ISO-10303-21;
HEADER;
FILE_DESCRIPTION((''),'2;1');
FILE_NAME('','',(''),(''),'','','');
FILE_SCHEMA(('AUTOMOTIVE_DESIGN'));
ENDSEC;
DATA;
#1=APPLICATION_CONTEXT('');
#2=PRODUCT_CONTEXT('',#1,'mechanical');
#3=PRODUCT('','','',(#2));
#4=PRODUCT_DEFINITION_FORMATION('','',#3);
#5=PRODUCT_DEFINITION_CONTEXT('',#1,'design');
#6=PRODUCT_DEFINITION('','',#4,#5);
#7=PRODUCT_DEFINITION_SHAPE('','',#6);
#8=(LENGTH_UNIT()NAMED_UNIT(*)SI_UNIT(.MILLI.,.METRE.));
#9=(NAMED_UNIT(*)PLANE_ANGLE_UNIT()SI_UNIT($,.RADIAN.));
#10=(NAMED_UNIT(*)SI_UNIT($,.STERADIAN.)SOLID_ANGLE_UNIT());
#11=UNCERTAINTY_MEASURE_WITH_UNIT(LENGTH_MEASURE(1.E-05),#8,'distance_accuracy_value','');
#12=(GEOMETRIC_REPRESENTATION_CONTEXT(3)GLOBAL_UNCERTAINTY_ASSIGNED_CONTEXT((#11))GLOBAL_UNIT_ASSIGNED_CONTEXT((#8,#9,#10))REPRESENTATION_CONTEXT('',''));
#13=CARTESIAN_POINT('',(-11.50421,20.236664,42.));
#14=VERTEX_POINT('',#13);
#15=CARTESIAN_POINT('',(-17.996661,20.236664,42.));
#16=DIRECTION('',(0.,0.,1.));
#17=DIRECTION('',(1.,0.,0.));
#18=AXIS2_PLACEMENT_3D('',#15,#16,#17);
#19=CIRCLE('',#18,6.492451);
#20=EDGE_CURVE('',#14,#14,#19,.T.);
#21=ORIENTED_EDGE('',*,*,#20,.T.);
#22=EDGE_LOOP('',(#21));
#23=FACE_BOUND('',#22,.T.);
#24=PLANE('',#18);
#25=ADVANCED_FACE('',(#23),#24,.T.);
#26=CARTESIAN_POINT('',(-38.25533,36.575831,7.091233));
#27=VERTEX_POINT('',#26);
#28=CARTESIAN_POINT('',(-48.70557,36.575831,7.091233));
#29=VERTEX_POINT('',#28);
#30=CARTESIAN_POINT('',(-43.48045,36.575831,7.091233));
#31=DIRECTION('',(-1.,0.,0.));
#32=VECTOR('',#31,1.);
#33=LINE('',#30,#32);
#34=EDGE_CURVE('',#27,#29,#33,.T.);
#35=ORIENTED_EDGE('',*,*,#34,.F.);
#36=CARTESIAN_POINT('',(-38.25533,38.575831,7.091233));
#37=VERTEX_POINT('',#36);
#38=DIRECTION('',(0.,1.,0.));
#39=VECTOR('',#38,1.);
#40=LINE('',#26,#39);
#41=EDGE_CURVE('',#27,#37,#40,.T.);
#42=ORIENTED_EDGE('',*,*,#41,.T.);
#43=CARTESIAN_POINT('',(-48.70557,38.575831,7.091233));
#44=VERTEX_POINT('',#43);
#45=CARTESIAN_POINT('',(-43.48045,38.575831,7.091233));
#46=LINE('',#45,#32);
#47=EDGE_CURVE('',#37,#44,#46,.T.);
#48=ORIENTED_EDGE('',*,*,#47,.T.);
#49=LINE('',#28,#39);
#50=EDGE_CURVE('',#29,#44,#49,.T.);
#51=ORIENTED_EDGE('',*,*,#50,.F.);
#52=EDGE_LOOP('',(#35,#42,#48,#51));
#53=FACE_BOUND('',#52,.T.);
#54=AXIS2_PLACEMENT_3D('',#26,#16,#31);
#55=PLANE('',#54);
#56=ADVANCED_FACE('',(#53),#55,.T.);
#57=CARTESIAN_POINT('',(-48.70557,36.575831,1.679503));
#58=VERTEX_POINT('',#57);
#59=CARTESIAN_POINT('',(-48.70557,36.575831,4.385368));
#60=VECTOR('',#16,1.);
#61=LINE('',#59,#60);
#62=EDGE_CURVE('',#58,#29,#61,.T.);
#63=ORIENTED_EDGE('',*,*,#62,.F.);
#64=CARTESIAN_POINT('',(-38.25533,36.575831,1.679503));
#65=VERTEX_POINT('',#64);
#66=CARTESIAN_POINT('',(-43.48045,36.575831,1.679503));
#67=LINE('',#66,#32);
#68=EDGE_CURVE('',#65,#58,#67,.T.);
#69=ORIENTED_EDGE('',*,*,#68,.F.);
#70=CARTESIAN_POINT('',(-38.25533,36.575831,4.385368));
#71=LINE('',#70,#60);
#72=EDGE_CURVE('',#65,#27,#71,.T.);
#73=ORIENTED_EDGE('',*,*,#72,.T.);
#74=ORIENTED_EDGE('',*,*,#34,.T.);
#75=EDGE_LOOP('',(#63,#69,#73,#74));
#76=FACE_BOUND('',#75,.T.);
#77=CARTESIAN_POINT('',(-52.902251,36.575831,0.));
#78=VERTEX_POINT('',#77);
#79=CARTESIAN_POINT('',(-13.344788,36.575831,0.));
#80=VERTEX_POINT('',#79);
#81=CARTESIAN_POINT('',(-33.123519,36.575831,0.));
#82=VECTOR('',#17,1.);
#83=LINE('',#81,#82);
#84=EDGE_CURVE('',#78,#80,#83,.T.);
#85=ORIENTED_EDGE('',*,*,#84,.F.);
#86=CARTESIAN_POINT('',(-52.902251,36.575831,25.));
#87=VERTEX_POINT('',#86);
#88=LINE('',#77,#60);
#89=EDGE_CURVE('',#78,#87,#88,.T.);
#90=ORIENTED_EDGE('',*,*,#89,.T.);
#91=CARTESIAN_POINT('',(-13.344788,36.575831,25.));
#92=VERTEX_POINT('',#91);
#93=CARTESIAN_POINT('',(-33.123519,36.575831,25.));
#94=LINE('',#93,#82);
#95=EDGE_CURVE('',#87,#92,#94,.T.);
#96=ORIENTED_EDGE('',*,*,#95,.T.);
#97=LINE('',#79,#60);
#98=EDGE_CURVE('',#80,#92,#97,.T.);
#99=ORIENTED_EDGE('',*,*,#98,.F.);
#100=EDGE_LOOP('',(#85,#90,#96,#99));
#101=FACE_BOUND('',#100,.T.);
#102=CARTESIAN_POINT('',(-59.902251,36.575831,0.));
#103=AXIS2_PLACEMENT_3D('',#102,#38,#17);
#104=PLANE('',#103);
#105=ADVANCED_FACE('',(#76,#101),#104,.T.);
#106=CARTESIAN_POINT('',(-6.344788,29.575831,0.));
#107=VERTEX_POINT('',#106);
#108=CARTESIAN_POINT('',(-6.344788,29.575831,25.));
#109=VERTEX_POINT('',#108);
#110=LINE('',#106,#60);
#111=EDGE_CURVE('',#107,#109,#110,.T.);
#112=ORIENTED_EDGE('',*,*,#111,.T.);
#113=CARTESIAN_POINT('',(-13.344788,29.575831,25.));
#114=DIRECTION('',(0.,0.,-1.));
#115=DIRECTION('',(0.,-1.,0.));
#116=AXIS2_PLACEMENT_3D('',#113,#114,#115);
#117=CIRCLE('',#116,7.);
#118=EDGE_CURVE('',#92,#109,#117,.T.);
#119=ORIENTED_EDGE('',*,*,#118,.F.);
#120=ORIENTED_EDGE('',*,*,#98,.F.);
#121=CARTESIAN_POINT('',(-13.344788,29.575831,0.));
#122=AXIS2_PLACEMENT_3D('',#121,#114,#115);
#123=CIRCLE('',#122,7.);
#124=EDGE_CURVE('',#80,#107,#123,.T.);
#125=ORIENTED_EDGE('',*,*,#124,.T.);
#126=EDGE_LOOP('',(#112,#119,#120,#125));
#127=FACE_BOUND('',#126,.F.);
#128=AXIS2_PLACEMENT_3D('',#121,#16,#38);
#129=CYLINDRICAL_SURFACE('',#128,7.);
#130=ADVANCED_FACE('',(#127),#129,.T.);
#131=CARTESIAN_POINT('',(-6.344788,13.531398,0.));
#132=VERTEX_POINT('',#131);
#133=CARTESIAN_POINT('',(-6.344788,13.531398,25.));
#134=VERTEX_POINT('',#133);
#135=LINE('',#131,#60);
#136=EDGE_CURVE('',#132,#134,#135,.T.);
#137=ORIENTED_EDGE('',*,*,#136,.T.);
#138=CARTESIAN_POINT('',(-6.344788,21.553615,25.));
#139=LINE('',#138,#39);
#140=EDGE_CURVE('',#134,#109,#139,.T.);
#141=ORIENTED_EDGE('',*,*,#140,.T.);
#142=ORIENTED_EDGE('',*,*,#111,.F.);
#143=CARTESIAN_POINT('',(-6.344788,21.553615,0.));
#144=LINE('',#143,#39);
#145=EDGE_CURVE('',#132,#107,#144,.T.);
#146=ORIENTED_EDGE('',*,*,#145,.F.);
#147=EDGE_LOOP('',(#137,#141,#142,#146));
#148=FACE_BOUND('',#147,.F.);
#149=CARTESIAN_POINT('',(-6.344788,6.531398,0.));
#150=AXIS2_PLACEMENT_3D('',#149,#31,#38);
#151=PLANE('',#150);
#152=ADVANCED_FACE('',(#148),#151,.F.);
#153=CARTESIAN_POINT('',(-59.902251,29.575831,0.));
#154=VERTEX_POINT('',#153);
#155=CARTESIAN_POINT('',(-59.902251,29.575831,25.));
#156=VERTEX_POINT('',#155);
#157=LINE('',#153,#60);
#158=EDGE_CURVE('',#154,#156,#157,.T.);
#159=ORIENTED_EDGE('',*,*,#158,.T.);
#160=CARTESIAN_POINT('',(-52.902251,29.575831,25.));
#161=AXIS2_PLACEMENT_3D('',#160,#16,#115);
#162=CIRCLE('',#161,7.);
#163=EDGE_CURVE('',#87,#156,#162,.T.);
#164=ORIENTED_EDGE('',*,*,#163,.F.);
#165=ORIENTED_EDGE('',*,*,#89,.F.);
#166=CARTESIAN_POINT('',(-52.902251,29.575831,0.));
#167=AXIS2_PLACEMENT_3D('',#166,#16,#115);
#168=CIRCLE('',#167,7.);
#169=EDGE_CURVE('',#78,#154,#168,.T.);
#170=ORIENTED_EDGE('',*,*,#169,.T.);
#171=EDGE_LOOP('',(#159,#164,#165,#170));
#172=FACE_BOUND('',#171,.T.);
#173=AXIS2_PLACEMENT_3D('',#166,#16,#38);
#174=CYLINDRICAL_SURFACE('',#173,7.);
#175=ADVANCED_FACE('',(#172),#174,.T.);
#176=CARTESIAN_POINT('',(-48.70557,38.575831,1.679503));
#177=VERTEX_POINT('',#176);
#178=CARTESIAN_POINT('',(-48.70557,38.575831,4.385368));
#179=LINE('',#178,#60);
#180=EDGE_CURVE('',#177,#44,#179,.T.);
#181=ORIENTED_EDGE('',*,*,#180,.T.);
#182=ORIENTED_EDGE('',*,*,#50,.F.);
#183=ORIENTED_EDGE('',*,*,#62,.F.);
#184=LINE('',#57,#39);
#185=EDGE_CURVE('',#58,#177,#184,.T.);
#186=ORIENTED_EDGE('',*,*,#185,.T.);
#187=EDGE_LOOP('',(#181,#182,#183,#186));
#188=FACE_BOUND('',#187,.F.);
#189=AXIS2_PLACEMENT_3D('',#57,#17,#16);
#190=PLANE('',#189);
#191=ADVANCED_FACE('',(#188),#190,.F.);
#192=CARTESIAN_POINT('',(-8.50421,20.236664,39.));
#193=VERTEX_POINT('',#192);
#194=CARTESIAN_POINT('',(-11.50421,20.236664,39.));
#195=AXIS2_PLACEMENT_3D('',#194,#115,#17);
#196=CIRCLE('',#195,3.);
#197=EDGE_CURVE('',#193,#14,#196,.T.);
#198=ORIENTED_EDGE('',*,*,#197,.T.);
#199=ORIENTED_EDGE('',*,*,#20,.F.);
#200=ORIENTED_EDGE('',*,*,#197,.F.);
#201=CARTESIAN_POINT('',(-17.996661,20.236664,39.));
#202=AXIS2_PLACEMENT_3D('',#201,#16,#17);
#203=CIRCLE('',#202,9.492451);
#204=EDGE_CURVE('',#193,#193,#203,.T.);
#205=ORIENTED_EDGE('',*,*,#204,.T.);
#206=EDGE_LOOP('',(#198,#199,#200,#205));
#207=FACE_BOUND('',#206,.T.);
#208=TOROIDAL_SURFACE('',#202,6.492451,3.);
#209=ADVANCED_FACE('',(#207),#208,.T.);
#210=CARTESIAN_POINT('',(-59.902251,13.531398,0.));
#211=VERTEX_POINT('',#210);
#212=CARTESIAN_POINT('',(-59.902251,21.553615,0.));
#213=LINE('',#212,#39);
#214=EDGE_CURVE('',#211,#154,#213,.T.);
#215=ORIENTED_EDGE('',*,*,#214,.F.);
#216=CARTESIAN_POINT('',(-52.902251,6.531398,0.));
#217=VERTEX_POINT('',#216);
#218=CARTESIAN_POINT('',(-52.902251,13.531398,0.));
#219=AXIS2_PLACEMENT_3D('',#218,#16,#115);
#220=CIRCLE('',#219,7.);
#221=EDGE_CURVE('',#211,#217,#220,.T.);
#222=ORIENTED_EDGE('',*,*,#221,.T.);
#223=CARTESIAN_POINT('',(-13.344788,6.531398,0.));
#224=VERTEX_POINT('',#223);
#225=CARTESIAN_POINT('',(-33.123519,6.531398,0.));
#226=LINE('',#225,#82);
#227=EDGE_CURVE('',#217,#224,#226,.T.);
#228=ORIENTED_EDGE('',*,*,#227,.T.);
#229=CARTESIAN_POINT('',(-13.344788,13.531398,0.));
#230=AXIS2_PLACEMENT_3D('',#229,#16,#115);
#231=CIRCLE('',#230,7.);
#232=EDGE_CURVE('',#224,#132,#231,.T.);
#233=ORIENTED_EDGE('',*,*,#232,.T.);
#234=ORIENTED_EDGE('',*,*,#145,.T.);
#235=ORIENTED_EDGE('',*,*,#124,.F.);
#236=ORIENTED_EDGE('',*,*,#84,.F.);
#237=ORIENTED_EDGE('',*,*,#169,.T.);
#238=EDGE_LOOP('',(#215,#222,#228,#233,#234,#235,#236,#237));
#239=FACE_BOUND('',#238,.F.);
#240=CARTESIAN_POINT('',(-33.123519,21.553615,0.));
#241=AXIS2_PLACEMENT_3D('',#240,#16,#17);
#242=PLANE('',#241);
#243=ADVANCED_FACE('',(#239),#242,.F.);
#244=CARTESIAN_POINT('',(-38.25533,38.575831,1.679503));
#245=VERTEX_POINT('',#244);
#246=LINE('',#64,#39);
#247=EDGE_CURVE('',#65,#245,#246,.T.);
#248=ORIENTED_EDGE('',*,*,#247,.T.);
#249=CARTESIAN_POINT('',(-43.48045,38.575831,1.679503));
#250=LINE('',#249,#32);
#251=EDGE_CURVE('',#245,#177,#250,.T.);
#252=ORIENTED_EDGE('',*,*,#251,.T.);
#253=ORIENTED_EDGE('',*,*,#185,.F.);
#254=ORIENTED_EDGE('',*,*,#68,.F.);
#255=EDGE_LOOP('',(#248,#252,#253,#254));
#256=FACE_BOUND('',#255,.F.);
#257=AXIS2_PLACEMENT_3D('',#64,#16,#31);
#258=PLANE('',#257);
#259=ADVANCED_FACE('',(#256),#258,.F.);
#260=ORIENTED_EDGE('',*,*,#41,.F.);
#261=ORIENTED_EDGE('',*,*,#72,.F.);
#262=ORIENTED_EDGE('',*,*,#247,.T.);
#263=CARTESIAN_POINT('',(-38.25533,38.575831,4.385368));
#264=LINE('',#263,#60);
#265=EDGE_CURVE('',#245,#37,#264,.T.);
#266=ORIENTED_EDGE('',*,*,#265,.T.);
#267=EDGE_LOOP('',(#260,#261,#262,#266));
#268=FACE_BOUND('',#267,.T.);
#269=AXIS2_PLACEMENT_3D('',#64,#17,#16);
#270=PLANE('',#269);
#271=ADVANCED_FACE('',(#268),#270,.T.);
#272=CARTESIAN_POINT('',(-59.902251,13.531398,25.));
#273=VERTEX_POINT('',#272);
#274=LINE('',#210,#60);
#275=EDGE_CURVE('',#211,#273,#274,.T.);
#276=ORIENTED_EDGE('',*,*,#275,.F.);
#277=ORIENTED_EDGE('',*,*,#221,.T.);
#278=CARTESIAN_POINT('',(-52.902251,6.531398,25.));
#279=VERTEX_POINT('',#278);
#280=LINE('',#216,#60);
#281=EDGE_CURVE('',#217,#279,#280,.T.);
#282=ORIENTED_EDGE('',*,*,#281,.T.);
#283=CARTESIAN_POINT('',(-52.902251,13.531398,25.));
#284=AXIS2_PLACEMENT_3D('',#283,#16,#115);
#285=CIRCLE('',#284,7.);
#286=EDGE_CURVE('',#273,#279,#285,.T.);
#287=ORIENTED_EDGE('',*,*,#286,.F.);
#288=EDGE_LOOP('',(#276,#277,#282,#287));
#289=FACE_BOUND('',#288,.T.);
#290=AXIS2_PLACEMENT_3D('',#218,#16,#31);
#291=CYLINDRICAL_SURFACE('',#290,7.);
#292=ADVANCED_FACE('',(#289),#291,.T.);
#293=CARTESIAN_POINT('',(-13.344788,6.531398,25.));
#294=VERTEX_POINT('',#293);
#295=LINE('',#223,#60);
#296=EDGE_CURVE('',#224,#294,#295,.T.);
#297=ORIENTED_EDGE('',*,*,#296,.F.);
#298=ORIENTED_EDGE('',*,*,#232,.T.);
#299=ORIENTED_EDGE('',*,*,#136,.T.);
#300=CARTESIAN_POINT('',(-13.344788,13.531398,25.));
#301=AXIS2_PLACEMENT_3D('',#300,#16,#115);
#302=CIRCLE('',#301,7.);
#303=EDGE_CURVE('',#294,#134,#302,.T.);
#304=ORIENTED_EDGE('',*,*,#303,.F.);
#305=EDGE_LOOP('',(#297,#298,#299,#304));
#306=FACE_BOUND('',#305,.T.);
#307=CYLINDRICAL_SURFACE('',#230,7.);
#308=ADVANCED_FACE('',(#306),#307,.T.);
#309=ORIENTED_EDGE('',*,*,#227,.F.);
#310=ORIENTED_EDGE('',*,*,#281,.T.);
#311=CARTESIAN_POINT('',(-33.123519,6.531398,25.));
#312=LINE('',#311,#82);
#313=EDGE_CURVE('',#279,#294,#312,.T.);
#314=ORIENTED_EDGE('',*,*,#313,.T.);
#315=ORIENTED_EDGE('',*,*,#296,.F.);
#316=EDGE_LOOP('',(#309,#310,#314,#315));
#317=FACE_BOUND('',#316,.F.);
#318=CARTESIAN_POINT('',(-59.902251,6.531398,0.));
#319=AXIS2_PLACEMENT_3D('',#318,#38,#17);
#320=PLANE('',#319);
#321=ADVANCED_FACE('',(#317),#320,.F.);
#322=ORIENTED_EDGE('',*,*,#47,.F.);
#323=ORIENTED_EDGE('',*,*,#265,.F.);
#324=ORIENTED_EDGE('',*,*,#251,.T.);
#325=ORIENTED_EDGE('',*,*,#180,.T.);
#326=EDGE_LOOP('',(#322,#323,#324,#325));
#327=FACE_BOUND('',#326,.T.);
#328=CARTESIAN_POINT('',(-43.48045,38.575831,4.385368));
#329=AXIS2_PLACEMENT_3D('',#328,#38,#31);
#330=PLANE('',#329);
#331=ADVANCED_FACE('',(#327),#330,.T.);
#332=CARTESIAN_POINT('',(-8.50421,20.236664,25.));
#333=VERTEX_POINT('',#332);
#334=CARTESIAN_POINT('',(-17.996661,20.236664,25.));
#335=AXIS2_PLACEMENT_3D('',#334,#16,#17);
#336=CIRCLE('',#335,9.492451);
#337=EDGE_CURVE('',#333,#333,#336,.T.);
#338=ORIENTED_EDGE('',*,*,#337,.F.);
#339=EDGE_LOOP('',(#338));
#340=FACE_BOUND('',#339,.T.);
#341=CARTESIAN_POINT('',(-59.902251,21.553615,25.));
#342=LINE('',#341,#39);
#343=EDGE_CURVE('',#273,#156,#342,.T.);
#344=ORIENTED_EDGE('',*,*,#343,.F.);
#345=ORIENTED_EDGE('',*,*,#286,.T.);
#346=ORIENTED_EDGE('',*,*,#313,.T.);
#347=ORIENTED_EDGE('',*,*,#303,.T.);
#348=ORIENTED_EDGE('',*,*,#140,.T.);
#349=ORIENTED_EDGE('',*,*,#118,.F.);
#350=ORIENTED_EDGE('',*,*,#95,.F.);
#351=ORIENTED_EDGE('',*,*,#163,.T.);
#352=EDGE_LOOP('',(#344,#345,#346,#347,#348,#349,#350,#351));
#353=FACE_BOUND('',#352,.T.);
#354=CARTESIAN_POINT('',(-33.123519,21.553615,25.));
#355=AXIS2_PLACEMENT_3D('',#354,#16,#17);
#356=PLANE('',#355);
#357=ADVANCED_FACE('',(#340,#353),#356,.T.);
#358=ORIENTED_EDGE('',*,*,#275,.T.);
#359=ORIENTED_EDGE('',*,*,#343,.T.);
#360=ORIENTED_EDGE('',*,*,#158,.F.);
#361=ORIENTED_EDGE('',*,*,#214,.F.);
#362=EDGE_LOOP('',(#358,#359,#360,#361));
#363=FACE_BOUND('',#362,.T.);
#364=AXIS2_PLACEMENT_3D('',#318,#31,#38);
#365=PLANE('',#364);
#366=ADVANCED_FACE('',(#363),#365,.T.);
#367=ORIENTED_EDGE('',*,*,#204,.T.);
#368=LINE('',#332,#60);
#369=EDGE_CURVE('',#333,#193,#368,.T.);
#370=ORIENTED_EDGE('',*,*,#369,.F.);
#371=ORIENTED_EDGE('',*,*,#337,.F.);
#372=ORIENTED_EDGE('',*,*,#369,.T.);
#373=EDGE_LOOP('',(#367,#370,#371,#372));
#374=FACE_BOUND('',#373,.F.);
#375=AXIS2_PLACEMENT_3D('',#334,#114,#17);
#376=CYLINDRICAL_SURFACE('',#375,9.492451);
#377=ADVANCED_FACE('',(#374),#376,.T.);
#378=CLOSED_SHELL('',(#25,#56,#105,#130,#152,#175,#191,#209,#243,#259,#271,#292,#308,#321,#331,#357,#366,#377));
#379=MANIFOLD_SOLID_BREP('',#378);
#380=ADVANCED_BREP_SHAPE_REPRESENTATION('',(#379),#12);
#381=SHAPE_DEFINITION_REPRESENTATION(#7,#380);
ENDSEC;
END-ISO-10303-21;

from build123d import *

# Parameters (mm, degrees)
F0_W      = 53.5574629903
F0_H      = 30.0444331951
F1_DEPTH  = 25
F2_R      = 9.492451093
F3_DEPTH  = 17
F4_R      = 3
F5_R      = 7
F6_R      = 7
F7_R      = 7
F8_R      = 7
F11_W     = 10.4502402246
F11_H     = 5.4117300315
F12_DEPTH = 2


# Not quite as in the source:
# - the program builds the solid bodies; features that only make, move or delete a surface that nothing else refers to are left out


with BuildPart() as f1:
    # F0 (on Top) → F1 (new body)
    with BuildSketch(Plane.XY):
        with Locations((-33.1235192716, 21.5536148753)):
            Rectangle(F0_W, F0_H)
    extrude(amount=F1_DEPTH)

    # F2 (on face) → F3 (join)
    with BuildSketch(Plane.XY.offset(25)):
        with Locations((-17.996661365, 20.2366635203)):
            Circle(F2_R)
    extrude(amount=F3_DEPTH)

    # F4
    f4_edges = [f1.edges().sort_by_distance(p)[0] for p in [
        (-27.489112, 20.236664, 42),
    ]]
    fillet(f4_edges, radius=F4_R)

    # F5
    f5_edges = [f1.edges().sort_by_distance(p)[0] for p in [
        (-6.344788, 36.575831, 12.5),
    ]]
    fillet(f5_edges, radius=F5_R)

    # F6
    f6_edges = [f1.edges().sort_by_distance(p)[0] for p in [
        (-59.902251, 36.575831, 12.5),
    ]]
    fillet(f6_edges, radius=F6_R)

    # F7
    f7_edges = [f1.edges().sort_by_distance(p)[0] for p in [
        (-59.902251, 6.531398, 12.5),
    ]]
    fillet(f7_edges, radius=F7_R)

    # F8
    f8_edges = [f1.edges().sort_by_distance(p)[0] for p in [
        (-6.344788, 6.531398, 12.5),
    ]]
    fillet(f8_edges, radius=F8_R)

    # F11 (on face) → F12 (join)
    with BuildSketch(Plane(origin=(0, 36.5758314729, 0), x_dir=(-1, 0, 0), z_dir=(0, 1, 0))):
        with Locations((43.4804502875, 4.3853675597)):
            Rectangle(F11_W, F11_H)
    extrude(amount=F12_DEPTH)


solid = f1.part
